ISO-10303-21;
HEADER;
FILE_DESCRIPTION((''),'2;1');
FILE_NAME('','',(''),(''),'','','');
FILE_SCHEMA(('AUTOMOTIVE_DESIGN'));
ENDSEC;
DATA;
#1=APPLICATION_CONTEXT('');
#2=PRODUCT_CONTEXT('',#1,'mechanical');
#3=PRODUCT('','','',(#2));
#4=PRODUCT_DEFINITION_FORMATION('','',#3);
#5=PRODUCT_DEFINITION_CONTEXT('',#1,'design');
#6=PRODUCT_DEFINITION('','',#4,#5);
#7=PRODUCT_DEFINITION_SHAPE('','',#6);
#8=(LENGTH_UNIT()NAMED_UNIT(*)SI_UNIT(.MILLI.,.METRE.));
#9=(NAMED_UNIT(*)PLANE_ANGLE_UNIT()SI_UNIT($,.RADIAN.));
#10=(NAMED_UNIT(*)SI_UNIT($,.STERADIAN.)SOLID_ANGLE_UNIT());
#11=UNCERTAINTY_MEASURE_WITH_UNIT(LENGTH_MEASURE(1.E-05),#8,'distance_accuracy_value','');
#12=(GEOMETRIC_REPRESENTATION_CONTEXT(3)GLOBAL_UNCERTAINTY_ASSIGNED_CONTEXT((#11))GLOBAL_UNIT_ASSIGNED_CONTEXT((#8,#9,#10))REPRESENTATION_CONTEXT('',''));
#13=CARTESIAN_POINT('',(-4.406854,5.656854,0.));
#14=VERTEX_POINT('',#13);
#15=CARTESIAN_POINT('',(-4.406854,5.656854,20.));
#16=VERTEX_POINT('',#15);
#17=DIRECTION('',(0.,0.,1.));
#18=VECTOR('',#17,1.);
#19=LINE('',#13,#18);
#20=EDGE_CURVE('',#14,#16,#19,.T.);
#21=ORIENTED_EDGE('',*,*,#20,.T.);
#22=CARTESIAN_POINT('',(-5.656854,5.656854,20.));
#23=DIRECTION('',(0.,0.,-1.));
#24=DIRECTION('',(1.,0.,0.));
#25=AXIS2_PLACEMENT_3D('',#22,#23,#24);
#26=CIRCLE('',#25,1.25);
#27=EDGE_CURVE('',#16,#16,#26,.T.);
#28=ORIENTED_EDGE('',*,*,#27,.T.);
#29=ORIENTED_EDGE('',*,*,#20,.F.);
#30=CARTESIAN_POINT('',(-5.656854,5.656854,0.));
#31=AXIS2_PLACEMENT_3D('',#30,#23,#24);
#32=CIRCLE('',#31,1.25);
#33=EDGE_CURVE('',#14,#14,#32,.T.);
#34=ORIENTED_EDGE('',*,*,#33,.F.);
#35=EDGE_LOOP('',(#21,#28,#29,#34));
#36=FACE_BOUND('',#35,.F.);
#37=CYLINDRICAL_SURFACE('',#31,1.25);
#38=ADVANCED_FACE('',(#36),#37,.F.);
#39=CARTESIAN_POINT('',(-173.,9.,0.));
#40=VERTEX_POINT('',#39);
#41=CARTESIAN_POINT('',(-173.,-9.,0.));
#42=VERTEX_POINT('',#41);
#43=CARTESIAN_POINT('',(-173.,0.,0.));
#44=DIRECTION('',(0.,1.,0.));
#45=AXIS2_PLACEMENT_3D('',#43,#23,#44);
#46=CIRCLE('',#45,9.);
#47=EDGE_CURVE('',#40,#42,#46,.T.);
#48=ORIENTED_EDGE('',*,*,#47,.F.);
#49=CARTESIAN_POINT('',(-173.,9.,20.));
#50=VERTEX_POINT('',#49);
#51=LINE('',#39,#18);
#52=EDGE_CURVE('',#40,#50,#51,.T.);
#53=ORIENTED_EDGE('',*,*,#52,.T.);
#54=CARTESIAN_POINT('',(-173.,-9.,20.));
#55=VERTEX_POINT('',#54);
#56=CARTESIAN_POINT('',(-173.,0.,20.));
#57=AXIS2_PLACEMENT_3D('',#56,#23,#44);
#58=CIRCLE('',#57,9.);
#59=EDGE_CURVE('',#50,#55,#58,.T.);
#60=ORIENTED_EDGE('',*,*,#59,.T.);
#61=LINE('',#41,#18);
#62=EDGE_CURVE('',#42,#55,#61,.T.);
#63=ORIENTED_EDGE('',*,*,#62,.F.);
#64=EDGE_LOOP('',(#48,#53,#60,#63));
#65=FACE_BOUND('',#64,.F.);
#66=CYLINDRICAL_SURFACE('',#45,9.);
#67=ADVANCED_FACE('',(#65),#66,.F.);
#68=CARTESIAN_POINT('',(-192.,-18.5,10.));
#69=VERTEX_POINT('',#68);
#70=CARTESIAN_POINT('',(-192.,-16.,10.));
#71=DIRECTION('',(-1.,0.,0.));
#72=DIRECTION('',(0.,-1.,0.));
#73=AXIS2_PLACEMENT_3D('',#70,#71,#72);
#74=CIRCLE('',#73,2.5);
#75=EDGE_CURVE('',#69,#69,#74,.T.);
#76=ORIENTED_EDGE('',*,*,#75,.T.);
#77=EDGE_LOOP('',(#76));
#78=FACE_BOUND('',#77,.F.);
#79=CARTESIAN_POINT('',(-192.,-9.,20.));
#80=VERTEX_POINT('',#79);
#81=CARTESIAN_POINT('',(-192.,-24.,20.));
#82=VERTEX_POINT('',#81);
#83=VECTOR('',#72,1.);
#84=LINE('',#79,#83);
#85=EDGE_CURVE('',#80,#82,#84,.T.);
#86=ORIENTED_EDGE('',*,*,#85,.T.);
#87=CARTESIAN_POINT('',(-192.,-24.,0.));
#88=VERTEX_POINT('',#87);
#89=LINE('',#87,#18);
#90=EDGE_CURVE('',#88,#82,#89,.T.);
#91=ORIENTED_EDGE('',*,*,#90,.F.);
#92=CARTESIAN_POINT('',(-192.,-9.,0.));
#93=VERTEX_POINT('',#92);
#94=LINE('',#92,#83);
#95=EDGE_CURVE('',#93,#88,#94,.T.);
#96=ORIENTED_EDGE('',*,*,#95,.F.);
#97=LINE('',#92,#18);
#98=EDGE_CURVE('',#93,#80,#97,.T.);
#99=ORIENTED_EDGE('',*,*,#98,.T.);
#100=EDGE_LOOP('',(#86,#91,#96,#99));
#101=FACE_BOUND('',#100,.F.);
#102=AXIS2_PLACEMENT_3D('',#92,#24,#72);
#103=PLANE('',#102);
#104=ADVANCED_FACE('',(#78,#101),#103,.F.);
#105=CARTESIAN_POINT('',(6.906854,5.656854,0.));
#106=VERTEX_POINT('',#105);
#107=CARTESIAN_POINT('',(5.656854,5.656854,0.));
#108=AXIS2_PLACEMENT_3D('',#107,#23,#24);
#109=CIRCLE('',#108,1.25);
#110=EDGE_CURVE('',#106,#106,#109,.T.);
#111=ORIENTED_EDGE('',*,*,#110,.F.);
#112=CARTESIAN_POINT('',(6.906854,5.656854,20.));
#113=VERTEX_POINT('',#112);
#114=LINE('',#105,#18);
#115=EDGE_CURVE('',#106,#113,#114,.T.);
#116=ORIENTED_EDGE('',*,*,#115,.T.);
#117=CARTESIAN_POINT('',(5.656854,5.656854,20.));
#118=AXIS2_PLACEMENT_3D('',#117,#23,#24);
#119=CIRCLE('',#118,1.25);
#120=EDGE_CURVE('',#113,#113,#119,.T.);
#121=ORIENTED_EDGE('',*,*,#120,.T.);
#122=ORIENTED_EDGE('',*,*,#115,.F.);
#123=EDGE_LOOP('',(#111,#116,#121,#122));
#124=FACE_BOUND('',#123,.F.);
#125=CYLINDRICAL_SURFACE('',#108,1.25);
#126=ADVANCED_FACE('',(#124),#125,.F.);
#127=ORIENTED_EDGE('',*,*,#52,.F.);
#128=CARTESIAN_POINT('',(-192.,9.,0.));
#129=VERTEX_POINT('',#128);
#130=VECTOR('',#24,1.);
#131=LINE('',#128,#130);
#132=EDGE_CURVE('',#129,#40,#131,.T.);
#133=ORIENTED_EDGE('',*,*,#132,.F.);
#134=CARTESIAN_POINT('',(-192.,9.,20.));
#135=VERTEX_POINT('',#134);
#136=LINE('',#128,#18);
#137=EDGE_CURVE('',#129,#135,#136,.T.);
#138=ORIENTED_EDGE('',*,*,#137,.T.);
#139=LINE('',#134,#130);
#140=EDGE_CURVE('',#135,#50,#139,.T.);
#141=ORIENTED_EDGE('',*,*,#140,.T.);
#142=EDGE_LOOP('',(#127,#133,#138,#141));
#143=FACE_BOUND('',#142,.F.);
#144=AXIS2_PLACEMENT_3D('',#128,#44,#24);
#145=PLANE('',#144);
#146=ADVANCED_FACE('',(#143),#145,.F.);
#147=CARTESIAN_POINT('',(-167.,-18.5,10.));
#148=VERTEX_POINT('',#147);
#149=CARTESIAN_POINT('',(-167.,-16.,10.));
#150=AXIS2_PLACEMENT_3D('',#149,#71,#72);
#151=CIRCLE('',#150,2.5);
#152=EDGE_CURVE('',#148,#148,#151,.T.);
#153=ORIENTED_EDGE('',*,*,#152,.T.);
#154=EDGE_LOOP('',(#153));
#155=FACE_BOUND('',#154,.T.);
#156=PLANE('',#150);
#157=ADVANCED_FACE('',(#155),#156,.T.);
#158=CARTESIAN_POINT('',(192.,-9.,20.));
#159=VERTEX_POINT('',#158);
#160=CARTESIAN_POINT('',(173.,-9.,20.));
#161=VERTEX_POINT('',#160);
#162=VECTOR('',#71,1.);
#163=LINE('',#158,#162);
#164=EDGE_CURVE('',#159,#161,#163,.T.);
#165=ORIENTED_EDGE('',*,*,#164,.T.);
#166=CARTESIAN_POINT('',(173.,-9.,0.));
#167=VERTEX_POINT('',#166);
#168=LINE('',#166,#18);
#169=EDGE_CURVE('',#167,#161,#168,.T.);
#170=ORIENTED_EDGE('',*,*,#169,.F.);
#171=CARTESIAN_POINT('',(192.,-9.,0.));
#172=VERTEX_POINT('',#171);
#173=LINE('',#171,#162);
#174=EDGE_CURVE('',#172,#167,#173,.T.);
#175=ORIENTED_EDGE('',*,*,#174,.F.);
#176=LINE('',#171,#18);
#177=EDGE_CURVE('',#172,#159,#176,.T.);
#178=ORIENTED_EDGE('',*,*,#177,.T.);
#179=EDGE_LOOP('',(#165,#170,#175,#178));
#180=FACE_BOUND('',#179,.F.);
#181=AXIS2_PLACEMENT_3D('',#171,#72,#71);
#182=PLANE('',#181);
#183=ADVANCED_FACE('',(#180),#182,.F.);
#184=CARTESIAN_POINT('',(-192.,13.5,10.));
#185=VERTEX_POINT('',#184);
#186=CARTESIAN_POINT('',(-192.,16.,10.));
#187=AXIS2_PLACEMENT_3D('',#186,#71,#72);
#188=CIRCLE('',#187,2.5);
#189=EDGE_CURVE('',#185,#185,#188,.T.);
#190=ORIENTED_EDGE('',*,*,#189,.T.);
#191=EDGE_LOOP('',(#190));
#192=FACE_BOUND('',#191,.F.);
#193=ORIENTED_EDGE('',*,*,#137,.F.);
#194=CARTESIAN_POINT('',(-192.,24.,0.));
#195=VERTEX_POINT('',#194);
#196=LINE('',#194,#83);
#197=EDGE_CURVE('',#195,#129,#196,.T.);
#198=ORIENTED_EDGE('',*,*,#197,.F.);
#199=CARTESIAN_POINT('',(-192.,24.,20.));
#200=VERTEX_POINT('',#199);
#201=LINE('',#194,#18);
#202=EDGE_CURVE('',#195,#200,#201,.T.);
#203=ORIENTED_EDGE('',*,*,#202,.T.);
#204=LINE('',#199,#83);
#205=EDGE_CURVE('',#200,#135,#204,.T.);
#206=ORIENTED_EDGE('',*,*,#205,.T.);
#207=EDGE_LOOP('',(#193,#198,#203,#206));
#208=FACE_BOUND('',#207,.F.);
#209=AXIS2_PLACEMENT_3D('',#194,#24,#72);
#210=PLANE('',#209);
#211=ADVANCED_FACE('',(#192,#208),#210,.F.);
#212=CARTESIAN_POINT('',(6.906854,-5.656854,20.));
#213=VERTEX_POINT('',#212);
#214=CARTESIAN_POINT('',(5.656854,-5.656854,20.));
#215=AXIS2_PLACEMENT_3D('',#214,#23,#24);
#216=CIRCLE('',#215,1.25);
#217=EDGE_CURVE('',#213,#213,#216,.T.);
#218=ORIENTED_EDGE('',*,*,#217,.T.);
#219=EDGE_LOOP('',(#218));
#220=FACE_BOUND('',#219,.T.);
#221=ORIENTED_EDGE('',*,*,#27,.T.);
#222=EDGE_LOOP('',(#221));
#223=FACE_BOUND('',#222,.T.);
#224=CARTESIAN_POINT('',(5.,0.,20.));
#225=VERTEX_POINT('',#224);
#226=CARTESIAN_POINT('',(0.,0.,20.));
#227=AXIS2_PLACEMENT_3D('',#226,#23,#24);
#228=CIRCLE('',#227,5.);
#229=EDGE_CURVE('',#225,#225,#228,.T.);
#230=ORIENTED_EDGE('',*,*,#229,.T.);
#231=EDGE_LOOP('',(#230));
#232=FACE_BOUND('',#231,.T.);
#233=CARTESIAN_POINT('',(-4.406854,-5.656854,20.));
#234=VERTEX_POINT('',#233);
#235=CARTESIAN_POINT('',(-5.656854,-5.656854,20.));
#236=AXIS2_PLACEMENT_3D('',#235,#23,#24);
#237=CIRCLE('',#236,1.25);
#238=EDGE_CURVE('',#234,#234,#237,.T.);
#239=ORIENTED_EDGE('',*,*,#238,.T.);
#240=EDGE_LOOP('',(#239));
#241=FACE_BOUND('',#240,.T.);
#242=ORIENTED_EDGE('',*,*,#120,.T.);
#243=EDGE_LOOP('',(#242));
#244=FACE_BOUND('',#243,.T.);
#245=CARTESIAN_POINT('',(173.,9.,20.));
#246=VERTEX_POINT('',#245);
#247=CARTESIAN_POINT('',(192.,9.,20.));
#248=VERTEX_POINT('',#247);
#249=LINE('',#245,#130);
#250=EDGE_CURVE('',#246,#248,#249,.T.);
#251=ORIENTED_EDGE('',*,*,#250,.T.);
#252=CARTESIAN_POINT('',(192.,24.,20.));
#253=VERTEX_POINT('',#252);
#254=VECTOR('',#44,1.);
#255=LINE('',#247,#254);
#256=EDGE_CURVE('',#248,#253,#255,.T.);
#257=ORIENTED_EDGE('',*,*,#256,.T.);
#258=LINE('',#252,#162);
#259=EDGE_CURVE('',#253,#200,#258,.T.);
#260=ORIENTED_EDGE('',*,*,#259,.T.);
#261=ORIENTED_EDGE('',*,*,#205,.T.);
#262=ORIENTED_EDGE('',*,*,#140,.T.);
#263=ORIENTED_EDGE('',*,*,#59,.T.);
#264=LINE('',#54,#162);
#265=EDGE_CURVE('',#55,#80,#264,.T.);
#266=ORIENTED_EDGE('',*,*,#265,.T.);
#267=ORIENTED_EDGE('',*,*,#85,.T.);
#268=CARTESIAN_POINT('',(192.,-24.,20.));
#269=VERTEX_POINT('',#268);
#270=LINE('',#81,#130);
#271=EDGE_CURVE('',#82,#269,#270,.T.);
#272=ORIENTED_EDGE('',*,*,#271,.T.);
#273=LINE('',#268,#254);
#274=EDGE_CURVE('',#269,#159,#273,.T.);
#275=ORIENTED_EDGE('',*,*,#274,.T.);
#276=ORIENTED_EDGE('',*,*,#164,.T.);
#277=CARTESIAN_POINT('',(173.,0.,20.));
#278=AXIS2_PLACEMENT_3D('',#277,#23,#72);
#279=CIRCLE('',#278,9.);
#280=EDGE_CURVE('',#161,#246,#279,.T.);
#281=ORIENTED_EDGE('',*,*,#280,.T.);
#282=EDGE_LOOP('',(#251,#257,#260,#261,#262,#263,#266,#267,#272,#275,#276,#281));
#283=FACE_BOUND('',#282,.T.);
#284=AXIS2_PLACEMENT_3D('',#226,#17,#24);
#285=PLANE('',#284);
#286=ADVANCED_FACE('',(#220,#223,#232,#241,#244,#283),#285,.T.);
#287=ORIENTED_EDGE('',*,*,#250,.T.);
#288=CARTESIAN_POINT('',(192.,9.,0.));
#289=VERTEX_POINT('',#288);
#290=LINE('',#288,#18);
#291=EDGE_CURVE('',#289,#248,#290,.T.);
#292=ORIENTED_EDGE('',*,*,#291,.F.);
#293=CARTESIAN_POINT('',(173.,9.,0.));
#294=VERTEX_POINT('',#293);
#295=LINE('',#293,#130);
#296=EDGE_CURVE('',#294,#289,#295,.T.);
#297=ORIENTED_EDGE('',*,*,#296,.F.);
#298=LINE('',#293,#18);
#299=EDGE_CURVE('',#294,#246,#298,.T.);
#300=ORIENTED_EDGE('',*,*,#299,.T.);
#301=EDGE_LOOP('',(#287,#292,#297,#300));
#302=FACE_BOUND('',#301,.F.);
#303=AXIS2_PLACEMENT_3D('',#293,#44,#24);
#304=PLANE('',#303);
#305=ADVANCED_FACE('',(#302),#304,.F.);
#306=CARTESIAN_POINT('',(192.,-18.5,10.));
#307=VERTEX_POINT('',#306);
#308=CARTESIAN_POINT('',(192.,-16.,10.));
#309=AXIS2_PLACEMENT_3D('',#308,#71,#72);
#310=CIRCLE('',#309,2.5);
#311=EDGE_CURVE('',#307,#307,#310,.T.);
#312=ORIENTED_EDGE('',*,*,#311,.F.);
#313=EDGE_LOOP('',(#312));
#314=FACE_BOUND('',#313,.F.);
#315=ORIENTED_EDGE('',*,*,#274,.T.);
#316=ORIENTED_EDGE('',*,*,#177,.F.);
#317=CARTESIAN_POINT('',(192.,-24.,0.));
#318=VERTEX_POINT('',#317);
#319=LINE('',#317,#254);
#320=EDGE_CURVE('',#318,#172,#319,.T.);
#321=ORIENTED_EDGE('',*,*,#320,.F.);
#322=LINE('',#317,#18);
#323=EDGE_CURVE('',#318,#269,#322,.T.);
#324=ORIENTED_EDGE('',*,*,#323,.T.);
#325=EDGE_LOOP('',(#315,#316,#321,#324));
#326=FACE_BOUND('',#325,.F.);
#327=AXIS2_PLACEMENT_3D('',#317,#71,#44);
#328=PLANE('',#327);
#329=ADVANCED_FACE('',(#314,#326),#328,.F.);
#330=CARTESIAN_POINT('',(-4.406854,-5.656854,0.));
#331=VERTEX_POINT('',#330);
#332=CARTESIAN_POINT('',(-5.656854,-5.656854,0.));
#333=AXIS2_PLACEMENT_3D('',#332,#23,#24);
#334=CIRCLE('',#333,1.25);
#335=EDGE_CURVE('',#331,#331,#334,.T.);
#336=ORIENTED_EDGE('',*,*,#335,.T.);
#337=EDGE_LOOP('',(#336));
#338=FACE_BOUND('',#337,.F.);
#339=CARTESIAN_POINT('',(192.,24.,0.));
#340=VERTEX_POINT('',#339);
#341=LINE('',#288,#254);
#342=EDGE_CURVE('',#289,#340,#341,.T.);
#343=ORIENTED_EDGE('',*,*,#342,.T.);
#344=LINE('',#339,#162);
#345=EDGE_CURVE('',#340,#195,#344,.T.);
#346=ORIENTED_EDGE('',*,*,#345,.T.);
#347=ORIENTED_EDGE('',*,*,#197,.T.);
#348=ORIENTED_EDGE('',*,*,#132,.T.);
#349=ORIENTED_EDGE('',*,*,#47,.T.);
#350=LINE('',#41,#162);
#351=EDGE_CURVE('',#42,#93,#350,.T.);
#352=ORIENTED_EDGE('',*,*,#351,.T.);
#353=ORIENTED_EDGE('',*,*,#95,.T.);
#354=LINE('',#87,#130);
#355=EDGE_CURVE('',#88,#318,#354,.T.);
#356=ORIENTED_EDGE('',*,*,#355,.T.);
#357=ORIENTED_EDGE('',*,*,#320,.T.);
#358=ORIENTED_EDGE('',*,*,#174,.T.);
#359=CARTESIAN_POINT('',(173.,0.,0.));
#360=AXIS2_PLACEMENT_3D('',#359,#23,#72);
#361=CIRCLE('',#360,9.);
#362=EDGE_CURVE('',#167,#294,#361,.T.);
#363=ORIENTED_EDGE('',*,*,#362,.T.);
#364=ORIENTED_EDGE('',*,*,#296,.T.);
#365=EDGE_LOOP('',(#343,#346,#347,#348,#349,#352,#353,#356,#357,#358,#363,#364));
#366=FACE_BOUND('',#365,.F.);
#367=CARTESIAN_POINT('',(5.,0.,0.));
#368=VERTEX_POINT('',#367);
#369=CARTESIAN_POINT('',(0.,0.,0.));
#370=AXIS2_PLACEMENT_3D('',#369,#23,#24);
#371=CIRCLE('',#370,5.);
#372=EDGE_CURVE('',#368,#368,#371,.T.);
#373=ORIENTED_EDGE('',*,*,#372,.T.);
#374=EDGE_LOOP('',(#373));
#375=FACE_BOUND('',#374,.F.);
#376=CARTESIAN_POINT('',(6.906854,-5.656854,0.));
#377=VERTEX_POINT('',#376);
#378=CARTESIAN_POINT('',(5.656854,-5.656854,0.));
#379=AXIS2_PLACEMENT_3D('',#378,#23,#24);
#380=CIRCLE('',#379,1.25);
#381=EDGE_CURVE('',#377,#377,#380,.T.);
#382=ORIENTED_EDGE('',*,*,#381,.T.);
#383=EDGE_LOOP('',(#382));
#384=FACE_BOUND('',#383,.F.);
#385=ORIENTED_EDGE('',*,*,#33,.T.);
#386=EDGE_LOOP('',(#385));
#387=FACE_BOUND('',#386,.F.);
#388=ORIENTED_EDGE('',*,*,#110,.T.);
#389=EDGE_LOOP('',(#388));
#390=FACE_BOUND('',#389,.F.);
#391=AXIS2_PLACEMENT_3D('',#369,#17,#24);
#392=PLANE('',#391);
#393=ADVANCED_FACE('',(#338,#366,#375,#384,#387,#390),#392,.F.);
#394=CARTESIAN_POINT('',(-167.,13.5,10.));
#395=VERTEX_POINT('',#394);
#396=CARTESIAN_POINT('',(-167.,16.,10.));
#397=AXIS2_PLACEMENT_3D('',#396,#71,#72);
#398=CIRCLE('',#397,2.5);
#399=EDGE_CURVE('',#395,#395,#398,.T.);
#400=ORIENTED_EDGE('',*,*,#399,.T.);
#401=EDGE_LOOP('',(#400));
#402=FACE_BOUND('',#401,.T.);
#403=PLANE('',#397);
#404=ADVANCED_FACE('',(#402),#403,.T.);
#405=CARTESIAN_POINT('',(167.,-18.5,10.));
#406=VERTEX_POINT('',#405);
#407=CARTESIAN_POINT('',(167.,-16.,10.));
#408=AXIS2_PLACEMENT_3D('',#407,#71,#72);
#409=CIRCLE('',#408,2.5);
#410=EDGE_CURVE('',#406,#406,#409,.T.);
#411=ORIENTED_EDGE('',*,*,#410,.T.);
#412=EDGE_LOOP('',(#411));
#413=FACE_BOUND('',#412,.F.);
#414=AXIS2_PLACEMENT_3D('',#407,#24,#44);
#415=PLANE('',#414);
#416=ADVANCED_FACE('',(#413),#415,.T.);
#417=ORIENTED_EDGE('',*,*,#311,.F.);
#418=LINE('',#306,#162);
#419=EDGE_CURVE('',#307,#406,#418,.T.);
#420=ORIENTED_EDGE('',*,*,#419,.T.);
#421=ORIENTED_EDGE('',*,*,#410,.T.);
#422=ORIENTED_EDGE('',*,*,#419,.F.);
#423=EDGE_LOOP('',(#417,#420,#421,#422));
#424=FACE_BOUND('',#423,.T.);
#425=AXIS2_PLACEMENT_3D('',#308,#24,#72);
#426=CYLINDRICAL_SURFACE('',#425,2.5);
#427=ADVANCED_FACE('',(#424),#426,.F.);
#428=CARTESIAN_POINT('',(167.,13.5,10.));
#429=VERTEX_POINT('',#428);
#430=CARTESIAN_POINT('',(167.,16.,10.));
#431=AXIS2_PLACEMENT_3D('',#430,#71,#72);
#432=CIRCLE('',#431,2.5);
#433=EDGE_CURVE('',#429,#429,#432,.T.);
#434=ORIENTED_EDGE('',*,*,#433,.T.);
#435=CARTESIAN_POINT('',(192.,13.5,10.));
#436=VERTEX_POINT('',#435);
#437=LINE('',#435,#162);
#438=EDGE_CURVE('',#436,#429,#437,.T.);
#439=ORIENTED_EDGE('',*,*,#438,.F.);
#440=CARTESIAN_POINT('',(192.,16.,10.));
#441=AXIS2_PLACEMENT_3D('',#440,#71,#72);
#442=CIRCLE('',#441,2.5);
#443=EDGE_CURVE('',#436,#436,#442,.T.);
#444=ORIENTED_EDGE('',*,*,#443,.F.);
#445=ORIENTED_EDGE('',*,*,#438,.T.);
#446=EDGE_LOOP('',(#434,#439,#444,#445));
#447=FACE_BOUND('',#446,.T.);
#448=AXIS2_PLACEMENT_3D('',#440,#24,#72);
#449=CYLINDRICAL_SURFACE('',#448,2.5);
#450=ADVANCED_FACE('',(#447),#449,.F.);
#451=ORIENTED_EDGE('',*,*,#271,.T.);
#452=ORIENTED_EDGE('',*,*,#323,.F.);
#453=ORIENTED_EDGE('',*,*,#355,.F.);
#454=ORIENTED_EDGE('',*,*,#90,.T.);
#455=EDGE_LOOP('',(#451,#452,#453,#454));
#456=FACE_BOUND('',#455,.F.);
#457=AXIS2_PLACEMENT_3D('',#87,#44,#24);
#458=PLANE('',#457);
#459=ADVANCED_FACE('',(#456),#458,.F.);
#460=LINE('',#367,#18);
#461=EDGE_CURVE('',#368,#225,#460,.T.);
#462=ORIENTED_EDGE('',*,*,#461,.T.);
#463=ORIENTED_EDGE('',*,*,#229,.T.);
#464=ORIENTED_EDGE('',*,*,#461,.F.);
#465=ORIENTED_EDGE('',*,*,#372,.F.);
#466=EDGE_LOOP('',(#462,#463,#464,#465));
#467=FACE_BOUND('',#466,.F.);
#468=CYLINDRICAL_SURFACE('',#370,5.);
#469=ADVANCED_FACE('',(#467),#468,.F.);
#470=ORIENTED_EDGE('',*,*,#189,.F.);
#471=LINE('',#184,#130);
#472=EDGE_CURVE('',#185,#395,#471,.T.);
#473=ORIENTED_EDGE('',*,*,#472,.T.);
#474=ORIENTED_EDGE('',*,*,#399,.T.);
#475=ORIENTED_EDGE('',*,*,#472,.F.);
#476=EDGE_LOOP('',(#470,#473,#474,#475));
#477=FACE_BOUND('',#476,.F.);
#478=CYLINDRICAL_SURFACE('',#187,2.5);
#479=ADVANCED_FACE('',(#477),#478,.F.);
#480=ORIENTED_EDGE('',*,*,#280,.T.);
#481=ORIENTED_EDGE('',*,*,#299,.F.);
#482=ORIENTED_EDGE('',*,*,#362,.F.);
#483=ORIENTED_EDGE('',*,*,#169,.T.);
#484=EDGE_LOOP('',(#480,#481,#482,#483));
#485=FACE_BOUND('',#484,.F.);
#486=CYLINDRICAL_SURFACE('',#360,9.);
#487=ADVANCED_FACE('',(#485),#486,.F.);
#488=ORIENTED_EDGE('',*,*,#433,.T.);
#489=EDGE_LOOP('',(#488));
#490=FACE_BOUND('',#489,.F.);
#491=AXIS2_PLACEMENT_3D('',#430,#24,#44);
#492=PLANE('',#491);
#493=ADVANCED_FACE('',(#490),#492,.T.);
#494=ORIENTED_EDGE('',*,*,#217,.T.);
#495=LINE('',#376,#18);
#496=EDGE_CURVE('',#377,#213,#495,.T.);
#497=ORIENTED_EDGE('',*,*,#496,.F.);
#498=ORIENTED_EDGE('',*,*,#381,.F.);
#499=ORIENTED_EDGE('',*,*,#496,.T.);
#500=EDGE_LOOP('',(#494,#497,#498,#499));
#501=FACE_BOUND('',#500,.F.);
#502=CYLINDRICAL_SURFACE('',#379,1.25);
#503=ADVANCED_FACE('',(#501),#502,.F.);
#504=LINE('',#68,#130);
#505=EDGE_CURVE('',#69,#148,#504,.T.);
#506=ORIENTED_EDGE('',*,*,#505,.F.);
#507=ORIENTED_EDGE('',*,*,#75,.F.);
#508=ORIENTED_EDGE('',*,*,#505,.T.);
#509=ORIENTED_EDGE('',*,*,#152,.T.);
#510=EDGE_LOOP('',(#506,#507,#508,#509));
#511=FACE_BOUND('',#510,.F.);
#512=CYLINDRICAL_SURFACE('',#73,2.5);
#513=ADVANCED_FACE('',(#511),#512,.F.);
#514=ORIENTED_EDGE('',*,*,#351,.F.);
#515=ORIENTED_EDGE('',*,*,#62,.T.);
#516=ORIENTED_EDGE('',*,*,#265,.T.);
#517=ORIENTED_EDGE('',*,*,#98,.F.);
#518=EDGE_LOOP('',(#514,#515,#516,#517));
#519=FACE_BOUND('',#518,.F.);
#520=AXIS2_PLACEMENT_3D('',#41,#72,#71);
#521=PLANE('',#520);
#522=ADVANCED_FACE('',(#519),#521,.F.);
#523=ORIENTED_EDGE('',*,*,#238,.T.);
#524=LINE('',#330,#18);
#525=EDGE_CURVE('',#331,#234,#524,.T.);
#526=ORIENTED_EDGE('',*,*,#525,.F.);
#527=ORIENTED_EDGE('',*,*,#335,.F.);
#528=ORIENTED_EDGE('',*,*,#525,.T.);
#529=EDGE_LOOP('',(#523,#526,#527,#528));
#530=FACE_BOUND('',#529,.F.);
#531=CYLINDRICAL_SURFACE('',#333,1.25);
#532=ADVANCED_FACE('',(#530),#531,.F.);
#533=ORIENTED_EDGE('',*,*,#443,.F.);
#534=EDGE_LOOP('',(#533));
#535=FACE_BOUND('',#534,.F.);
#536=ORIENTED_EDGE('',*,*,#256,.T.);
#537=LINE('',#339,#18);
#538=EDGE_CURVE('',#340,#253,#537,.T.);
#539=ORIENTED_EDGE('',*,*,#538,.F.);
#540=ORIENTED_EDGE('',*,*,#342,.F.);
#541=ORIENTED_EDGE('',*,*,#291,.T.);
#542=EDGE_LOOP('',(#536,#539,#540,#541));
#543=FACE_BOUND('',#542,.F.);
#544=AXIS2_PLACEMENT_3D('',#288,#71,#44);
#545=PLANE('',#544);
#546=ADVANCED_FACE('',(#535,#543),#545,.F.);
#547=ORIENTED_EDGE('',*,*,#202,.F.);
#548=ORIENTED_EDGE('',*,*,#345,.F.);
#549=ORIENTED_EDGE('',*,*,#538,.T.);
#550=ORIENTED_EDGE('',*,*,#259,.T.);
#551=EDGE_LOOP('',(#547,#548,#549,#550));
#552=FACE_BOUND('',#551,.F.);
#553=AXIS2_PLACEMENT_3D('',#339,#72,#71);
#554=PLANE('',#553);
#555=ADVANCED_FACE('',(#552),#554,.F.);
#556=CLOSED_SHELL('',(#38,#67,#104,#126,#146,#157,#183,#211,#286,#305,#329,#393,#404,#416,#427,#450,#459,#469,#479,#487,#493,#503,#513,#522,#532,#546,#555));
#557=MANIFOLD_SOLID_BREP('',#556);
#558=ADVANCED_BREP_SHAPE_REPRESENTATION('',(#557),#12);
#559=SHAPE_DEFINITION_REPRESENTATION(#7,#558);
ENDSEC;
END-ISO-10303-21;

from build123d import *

# Parameters (mm, degrees)
F1_DEPTH = 20
F2_R     = 2.5
F3_DEPTH = 25
F4_R     = 5
F4_R_2   = 1.25
F5_DEPTH = 25


# Not quite as in the source:
# - a pattern or mirror of a feature is missing from the dataset's text; its kind, count and spacing are read off the source's solid


with BuildPart() as f1:
    # F0 (on Top) → F1 (new body)
    with BuildSketch(Plane.XY):
        with BuildLine():
            Line((-192, -24), (192, -24))
            Line((192, -24), (192, -9))
            Line((192, -9), (173, -9))
            ThreePointArc((173, -9), (164, 0), (173, 9))
            Line((173, 9), (192, 9))
            Line((192, 9), (192, 24))
            Line((192, 24), (-192, 24))
            Line((-192, 24), (-192, 9))
            Line((-192, 9), (-173, 9))
            ThreePointArc((-173, 9), (-164, 0), (-173, -9))
            Line((-173, -9), (-192, -9))
            Line((-192, -9), (-192, -24))
        make_face()
    extrude(amount=F1_DEPTH)

    # F2 (on face) → F3 (cut)
    with BuildSketch(Plane(origin=(-192, 0, 0), x_dir=(0, -1, 0), z_dir=(-1, 0, 0))):
        with Locations((-16, 10)):
            Circle(F2_R)
        with Locations((16, 10)):
            Circle(F2_R)
    f3 = extrude(amount=-F3_DEPTH, mode=Mode.SUBTRACT)

    # F3_copies: F3 across plane
    add(f3.mirror(Plane(origin=(0, 0, 0), x_dir=(0, 0, 1), z_dir=(1, 0, 0))), mode=Mode.SUBTRACT)

    # F4 (on face) → F5 (cut)
    with BuildSketch(Plane(origin=(0, 0, 0), x_dir=(1, 0, 0), z_dir=(0, 0, -1))):
        Circle(F4_R)
        with Locations((-5.6568542495, 5.6568542495)):
            Circle(F4_R_2)
        with Locations((-5.6568542495, -5.6568542495)):
            Circle(F4_R_2)
        with Locations((5.6568542495, -5.6568542495)):
            Circle(F4_R_2)
        with Locations((5.6568542495, 5.6568542495)):
            Circle(F4_R_2)
    extrude(amount=-F5_DEPTH, mode=Mode.SUBTRACT)


solid = f1.part
